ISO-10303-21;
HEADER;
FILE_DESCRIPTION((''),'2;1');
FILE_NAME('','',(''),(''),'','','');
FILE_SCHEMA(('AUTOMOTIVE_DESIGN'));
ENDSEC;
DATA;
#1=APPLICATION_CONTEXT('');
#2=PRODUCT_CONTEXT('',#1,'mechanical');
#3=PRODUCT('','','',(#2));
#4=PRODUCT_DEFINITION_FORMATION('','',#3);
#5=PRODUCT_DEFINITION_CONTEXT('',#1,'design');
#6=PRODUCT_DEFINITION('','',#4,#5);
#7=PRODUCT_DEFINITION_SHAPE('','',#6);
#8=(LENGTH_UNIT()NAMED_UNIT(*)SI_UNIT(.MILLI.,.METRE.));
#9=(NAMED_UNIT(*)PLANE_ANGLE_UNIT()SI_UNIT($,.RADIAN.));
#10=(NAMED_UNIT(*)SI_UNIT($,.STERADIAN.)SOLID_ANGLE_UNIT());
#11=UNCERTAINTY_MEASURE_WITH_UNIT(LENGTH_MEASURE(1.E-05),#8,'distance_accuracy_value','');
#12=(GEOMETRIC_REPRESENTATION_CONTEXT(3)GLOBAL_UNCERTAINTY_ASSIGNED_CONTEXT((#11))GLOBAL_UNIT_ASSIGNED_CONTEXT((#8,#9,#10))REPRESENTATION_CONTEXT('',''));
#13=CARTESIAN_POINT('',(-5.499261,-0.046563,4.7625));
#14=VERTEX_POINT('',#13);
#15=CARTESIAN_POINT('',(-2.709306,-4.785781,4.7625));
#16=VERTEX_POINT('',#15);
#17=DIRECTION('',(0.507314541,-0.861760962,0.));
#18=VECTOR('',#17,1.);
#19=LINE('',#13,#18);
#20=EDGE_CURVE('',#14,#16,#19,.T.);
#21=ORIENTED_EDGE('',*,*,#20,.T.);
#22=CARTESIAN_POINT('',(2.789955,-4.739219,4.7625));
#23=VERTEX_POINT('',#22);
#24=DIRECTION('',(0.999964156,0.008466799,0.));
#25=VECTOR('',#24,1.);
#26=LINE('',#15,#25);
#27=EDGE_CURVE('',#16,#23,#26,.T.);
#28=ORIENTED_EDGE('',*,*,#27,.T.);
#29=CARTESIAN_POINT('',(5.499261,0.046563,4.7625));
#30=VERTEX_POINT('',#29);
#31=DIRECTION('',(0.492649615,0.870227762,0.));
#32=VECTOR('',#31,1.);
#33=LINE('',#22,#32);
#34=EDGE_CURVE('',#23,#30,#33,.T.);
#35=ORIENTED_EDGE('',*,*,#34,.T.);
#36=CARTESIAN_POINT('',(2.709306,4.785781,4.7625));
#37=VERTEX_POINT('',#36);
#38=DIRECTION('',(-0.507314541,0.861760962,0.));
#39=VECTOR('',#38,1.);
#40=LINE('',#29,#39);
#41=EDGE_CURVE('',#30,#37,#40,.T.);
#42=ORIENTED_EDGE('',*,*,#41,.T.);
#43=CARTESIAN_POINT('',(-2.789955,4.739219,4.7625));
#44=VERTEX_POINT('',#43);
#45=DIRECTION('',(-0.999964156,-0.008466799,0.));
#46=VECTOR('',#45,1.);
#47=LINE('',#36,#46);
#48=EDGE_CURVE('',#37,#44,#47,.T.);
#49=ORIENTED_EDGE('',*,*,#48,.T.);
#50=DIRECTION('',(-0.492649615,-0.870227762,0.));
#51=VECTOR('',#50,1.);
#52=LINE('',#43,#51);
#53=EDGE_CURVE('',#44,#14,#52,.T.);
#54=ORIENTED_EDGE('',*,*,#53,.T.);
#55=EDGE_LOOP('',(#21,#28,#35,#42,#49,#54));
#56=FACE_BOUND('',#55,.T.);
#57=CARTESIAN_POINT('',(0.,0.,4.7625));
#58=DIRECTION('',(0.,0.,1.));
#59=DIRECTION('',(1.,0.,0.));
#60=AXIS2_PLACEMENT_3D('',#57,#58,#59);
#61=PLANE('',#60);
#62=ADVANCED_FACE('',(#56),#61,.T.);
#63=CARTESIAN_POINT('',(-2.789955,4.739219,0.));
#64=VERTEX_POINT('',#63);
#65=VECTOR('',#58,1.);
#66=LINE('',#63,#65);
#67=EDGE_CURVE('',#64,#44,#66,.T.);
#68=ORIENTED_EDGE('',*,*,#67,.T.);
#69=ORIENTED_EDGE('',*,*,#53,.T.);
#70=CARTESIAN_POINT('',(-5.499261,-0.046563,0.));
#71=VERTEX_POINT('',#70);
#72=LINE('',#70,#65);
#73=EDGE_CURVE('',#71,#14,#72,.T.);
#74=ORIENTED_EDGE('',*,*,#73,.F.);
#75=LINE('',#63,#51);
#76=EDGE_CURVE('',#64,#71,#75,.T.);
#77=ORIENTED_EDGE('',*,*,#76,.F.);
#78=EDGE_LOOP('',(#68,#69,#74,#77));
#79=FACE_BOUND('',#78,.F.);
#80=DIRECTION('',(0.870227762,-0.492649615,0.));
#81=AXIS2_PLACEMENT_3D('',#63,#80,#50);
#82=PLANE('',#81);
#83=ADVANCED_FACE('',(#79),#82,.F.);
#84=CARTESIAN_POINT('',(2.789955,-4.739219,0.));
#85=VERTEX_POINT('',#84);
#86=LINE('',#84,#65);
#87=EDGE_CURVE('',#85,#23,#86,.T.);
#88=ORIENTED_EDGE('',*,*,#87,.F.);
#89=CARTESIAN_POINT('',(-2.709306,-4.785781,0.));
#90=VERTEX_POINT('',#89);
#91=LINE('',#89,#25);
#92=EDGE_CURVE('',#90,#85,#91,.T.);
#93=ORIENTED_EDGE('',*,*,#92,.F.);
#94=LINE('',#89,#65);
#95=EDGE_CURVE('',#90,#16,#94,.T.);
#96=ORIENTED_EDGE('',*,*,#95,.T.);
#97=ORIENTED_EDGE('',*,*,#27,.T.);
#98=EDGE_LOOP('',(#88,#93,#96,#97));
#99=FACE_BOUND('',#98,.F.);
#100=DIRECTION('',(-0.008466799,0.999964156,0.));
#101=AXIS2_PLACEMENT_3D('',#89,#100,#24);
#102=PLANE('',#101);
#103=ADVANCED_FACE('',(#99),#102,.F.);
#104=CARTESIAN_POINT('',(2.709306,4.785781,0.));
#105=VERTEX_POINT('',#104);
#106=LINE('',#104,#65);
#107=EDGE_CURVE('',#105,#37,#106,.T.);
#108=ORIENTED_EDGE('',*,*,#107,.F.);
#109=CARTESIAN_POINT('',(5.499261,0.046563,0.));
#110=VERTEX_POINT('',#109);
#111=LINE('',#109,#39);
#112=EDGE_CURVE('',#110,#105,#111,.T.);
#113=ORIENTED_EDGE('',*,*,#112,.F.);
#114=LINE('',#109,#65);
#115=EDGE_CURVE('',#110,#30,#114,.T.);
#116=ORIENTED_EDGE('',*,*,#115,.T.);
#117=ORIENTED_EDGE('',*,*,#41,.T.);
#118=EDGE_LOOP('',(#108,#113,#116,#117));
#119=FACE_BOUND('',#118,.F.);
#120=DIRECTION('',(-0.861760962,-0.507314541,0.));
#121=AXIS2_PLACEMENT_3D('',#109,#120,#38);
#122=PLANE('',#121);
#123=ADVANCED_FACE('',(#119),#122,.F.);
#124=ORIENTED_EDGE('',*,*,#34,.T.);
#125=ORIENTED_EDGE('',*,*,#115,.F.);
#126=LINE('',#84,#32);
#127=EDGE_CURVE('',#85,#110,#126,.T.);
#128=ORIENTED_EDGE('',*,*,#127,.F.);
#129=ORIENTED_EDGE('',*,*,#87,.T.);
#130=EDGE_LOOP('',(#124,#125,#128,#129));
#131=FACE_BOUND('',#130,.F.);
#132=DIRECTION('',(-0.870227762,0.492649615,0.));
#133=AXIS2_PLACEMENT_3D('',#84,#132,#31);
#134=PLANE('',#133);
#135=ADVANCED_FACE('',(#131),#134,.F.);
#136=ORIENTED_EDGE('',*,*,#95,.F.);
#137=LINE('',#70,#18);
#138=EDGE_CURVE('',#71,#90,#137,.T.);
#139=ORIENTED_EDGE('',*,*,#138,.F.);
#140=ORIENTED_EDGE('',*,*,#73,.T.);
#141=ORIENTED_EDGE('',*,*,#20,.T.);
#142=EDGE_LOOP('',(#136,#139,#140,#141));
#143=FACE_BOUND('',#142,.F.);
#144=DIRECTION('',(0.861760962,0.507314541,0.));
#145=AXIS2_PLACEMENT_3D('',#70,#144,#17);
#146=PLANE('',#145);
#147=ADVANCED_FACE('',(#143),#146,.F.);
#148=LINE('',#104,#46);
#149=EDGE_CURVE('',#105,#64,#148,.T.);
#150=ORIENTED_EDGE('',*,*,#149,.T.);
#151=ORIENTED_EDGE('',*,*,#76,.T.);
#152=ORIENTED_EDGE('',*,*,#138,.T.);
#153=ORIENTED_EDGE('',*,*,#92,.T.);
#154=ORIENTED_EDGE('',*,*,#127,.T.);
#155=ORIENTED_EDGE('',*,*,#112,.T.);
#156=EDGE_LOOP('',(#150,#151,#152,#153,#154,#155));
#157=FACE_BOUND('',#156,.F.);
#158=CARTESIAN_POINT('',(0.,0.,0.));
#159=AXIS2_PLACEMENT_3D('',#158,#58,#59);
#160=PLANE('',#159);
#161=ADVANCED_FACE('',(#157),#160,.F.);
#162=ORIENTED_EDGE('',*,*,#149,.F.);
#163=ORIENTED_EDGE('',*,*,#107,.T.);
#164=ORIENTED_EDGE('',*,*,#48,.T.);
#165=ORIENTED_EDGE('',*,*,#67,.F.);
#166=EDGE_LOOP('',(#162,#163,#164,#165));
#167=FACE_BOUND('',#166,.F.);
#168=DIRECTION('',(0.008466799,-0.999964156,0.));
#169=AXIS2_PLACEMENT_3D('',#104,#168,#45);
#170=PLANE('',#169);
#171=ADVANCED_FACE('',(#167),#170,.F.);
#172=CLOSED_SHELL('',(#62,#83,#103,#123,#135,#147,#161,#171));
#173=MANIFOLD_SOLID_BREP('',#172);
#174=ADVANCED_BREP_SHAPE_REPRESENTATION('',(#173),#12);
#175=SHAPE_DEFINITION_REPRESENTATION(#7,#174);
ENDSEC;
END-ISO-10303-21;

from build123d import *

# Parameters (mm, degrees)
F3_DEPTH = 4.7625
F5_DEPTH = 4.7625


# Not quite as in the source:
# - the program builds the solid bodies; features that only make, move or delete a surface that nothing else refers to are left out


with BuildPart() as f3:
    # F0 (on Top) → F3 (new body)
    with BuildSketch(Plane.XY):
        Polygon((-2.7899552341, 4.7392185946), (-5.499261314, -0.0465628108), (-2.70930608, -4.7857814054), (2.7899552341, -4.7392185946), (5.499261314, 0.0465628108), (2.70930608, 4.7857814054), align=None)
    extrude(amount=F3_DEPTH)


with BuildPart() as f5:
    # F0 (on Top) → F5 (new body)
    with BuildSketch(Plane.XY):
        Polygon((-2.7899552341, 4.7392185946), (-5.499261314, -0.0465628108), (-2.70930608, -4.7857814054), (2.7899552341, -4.7392185946), (5.499261314, 0.0465628108), (2.70930608, 4.7857814054), align=None)
    extrude(amount=F5_DEPTH)


solid = f5.part
